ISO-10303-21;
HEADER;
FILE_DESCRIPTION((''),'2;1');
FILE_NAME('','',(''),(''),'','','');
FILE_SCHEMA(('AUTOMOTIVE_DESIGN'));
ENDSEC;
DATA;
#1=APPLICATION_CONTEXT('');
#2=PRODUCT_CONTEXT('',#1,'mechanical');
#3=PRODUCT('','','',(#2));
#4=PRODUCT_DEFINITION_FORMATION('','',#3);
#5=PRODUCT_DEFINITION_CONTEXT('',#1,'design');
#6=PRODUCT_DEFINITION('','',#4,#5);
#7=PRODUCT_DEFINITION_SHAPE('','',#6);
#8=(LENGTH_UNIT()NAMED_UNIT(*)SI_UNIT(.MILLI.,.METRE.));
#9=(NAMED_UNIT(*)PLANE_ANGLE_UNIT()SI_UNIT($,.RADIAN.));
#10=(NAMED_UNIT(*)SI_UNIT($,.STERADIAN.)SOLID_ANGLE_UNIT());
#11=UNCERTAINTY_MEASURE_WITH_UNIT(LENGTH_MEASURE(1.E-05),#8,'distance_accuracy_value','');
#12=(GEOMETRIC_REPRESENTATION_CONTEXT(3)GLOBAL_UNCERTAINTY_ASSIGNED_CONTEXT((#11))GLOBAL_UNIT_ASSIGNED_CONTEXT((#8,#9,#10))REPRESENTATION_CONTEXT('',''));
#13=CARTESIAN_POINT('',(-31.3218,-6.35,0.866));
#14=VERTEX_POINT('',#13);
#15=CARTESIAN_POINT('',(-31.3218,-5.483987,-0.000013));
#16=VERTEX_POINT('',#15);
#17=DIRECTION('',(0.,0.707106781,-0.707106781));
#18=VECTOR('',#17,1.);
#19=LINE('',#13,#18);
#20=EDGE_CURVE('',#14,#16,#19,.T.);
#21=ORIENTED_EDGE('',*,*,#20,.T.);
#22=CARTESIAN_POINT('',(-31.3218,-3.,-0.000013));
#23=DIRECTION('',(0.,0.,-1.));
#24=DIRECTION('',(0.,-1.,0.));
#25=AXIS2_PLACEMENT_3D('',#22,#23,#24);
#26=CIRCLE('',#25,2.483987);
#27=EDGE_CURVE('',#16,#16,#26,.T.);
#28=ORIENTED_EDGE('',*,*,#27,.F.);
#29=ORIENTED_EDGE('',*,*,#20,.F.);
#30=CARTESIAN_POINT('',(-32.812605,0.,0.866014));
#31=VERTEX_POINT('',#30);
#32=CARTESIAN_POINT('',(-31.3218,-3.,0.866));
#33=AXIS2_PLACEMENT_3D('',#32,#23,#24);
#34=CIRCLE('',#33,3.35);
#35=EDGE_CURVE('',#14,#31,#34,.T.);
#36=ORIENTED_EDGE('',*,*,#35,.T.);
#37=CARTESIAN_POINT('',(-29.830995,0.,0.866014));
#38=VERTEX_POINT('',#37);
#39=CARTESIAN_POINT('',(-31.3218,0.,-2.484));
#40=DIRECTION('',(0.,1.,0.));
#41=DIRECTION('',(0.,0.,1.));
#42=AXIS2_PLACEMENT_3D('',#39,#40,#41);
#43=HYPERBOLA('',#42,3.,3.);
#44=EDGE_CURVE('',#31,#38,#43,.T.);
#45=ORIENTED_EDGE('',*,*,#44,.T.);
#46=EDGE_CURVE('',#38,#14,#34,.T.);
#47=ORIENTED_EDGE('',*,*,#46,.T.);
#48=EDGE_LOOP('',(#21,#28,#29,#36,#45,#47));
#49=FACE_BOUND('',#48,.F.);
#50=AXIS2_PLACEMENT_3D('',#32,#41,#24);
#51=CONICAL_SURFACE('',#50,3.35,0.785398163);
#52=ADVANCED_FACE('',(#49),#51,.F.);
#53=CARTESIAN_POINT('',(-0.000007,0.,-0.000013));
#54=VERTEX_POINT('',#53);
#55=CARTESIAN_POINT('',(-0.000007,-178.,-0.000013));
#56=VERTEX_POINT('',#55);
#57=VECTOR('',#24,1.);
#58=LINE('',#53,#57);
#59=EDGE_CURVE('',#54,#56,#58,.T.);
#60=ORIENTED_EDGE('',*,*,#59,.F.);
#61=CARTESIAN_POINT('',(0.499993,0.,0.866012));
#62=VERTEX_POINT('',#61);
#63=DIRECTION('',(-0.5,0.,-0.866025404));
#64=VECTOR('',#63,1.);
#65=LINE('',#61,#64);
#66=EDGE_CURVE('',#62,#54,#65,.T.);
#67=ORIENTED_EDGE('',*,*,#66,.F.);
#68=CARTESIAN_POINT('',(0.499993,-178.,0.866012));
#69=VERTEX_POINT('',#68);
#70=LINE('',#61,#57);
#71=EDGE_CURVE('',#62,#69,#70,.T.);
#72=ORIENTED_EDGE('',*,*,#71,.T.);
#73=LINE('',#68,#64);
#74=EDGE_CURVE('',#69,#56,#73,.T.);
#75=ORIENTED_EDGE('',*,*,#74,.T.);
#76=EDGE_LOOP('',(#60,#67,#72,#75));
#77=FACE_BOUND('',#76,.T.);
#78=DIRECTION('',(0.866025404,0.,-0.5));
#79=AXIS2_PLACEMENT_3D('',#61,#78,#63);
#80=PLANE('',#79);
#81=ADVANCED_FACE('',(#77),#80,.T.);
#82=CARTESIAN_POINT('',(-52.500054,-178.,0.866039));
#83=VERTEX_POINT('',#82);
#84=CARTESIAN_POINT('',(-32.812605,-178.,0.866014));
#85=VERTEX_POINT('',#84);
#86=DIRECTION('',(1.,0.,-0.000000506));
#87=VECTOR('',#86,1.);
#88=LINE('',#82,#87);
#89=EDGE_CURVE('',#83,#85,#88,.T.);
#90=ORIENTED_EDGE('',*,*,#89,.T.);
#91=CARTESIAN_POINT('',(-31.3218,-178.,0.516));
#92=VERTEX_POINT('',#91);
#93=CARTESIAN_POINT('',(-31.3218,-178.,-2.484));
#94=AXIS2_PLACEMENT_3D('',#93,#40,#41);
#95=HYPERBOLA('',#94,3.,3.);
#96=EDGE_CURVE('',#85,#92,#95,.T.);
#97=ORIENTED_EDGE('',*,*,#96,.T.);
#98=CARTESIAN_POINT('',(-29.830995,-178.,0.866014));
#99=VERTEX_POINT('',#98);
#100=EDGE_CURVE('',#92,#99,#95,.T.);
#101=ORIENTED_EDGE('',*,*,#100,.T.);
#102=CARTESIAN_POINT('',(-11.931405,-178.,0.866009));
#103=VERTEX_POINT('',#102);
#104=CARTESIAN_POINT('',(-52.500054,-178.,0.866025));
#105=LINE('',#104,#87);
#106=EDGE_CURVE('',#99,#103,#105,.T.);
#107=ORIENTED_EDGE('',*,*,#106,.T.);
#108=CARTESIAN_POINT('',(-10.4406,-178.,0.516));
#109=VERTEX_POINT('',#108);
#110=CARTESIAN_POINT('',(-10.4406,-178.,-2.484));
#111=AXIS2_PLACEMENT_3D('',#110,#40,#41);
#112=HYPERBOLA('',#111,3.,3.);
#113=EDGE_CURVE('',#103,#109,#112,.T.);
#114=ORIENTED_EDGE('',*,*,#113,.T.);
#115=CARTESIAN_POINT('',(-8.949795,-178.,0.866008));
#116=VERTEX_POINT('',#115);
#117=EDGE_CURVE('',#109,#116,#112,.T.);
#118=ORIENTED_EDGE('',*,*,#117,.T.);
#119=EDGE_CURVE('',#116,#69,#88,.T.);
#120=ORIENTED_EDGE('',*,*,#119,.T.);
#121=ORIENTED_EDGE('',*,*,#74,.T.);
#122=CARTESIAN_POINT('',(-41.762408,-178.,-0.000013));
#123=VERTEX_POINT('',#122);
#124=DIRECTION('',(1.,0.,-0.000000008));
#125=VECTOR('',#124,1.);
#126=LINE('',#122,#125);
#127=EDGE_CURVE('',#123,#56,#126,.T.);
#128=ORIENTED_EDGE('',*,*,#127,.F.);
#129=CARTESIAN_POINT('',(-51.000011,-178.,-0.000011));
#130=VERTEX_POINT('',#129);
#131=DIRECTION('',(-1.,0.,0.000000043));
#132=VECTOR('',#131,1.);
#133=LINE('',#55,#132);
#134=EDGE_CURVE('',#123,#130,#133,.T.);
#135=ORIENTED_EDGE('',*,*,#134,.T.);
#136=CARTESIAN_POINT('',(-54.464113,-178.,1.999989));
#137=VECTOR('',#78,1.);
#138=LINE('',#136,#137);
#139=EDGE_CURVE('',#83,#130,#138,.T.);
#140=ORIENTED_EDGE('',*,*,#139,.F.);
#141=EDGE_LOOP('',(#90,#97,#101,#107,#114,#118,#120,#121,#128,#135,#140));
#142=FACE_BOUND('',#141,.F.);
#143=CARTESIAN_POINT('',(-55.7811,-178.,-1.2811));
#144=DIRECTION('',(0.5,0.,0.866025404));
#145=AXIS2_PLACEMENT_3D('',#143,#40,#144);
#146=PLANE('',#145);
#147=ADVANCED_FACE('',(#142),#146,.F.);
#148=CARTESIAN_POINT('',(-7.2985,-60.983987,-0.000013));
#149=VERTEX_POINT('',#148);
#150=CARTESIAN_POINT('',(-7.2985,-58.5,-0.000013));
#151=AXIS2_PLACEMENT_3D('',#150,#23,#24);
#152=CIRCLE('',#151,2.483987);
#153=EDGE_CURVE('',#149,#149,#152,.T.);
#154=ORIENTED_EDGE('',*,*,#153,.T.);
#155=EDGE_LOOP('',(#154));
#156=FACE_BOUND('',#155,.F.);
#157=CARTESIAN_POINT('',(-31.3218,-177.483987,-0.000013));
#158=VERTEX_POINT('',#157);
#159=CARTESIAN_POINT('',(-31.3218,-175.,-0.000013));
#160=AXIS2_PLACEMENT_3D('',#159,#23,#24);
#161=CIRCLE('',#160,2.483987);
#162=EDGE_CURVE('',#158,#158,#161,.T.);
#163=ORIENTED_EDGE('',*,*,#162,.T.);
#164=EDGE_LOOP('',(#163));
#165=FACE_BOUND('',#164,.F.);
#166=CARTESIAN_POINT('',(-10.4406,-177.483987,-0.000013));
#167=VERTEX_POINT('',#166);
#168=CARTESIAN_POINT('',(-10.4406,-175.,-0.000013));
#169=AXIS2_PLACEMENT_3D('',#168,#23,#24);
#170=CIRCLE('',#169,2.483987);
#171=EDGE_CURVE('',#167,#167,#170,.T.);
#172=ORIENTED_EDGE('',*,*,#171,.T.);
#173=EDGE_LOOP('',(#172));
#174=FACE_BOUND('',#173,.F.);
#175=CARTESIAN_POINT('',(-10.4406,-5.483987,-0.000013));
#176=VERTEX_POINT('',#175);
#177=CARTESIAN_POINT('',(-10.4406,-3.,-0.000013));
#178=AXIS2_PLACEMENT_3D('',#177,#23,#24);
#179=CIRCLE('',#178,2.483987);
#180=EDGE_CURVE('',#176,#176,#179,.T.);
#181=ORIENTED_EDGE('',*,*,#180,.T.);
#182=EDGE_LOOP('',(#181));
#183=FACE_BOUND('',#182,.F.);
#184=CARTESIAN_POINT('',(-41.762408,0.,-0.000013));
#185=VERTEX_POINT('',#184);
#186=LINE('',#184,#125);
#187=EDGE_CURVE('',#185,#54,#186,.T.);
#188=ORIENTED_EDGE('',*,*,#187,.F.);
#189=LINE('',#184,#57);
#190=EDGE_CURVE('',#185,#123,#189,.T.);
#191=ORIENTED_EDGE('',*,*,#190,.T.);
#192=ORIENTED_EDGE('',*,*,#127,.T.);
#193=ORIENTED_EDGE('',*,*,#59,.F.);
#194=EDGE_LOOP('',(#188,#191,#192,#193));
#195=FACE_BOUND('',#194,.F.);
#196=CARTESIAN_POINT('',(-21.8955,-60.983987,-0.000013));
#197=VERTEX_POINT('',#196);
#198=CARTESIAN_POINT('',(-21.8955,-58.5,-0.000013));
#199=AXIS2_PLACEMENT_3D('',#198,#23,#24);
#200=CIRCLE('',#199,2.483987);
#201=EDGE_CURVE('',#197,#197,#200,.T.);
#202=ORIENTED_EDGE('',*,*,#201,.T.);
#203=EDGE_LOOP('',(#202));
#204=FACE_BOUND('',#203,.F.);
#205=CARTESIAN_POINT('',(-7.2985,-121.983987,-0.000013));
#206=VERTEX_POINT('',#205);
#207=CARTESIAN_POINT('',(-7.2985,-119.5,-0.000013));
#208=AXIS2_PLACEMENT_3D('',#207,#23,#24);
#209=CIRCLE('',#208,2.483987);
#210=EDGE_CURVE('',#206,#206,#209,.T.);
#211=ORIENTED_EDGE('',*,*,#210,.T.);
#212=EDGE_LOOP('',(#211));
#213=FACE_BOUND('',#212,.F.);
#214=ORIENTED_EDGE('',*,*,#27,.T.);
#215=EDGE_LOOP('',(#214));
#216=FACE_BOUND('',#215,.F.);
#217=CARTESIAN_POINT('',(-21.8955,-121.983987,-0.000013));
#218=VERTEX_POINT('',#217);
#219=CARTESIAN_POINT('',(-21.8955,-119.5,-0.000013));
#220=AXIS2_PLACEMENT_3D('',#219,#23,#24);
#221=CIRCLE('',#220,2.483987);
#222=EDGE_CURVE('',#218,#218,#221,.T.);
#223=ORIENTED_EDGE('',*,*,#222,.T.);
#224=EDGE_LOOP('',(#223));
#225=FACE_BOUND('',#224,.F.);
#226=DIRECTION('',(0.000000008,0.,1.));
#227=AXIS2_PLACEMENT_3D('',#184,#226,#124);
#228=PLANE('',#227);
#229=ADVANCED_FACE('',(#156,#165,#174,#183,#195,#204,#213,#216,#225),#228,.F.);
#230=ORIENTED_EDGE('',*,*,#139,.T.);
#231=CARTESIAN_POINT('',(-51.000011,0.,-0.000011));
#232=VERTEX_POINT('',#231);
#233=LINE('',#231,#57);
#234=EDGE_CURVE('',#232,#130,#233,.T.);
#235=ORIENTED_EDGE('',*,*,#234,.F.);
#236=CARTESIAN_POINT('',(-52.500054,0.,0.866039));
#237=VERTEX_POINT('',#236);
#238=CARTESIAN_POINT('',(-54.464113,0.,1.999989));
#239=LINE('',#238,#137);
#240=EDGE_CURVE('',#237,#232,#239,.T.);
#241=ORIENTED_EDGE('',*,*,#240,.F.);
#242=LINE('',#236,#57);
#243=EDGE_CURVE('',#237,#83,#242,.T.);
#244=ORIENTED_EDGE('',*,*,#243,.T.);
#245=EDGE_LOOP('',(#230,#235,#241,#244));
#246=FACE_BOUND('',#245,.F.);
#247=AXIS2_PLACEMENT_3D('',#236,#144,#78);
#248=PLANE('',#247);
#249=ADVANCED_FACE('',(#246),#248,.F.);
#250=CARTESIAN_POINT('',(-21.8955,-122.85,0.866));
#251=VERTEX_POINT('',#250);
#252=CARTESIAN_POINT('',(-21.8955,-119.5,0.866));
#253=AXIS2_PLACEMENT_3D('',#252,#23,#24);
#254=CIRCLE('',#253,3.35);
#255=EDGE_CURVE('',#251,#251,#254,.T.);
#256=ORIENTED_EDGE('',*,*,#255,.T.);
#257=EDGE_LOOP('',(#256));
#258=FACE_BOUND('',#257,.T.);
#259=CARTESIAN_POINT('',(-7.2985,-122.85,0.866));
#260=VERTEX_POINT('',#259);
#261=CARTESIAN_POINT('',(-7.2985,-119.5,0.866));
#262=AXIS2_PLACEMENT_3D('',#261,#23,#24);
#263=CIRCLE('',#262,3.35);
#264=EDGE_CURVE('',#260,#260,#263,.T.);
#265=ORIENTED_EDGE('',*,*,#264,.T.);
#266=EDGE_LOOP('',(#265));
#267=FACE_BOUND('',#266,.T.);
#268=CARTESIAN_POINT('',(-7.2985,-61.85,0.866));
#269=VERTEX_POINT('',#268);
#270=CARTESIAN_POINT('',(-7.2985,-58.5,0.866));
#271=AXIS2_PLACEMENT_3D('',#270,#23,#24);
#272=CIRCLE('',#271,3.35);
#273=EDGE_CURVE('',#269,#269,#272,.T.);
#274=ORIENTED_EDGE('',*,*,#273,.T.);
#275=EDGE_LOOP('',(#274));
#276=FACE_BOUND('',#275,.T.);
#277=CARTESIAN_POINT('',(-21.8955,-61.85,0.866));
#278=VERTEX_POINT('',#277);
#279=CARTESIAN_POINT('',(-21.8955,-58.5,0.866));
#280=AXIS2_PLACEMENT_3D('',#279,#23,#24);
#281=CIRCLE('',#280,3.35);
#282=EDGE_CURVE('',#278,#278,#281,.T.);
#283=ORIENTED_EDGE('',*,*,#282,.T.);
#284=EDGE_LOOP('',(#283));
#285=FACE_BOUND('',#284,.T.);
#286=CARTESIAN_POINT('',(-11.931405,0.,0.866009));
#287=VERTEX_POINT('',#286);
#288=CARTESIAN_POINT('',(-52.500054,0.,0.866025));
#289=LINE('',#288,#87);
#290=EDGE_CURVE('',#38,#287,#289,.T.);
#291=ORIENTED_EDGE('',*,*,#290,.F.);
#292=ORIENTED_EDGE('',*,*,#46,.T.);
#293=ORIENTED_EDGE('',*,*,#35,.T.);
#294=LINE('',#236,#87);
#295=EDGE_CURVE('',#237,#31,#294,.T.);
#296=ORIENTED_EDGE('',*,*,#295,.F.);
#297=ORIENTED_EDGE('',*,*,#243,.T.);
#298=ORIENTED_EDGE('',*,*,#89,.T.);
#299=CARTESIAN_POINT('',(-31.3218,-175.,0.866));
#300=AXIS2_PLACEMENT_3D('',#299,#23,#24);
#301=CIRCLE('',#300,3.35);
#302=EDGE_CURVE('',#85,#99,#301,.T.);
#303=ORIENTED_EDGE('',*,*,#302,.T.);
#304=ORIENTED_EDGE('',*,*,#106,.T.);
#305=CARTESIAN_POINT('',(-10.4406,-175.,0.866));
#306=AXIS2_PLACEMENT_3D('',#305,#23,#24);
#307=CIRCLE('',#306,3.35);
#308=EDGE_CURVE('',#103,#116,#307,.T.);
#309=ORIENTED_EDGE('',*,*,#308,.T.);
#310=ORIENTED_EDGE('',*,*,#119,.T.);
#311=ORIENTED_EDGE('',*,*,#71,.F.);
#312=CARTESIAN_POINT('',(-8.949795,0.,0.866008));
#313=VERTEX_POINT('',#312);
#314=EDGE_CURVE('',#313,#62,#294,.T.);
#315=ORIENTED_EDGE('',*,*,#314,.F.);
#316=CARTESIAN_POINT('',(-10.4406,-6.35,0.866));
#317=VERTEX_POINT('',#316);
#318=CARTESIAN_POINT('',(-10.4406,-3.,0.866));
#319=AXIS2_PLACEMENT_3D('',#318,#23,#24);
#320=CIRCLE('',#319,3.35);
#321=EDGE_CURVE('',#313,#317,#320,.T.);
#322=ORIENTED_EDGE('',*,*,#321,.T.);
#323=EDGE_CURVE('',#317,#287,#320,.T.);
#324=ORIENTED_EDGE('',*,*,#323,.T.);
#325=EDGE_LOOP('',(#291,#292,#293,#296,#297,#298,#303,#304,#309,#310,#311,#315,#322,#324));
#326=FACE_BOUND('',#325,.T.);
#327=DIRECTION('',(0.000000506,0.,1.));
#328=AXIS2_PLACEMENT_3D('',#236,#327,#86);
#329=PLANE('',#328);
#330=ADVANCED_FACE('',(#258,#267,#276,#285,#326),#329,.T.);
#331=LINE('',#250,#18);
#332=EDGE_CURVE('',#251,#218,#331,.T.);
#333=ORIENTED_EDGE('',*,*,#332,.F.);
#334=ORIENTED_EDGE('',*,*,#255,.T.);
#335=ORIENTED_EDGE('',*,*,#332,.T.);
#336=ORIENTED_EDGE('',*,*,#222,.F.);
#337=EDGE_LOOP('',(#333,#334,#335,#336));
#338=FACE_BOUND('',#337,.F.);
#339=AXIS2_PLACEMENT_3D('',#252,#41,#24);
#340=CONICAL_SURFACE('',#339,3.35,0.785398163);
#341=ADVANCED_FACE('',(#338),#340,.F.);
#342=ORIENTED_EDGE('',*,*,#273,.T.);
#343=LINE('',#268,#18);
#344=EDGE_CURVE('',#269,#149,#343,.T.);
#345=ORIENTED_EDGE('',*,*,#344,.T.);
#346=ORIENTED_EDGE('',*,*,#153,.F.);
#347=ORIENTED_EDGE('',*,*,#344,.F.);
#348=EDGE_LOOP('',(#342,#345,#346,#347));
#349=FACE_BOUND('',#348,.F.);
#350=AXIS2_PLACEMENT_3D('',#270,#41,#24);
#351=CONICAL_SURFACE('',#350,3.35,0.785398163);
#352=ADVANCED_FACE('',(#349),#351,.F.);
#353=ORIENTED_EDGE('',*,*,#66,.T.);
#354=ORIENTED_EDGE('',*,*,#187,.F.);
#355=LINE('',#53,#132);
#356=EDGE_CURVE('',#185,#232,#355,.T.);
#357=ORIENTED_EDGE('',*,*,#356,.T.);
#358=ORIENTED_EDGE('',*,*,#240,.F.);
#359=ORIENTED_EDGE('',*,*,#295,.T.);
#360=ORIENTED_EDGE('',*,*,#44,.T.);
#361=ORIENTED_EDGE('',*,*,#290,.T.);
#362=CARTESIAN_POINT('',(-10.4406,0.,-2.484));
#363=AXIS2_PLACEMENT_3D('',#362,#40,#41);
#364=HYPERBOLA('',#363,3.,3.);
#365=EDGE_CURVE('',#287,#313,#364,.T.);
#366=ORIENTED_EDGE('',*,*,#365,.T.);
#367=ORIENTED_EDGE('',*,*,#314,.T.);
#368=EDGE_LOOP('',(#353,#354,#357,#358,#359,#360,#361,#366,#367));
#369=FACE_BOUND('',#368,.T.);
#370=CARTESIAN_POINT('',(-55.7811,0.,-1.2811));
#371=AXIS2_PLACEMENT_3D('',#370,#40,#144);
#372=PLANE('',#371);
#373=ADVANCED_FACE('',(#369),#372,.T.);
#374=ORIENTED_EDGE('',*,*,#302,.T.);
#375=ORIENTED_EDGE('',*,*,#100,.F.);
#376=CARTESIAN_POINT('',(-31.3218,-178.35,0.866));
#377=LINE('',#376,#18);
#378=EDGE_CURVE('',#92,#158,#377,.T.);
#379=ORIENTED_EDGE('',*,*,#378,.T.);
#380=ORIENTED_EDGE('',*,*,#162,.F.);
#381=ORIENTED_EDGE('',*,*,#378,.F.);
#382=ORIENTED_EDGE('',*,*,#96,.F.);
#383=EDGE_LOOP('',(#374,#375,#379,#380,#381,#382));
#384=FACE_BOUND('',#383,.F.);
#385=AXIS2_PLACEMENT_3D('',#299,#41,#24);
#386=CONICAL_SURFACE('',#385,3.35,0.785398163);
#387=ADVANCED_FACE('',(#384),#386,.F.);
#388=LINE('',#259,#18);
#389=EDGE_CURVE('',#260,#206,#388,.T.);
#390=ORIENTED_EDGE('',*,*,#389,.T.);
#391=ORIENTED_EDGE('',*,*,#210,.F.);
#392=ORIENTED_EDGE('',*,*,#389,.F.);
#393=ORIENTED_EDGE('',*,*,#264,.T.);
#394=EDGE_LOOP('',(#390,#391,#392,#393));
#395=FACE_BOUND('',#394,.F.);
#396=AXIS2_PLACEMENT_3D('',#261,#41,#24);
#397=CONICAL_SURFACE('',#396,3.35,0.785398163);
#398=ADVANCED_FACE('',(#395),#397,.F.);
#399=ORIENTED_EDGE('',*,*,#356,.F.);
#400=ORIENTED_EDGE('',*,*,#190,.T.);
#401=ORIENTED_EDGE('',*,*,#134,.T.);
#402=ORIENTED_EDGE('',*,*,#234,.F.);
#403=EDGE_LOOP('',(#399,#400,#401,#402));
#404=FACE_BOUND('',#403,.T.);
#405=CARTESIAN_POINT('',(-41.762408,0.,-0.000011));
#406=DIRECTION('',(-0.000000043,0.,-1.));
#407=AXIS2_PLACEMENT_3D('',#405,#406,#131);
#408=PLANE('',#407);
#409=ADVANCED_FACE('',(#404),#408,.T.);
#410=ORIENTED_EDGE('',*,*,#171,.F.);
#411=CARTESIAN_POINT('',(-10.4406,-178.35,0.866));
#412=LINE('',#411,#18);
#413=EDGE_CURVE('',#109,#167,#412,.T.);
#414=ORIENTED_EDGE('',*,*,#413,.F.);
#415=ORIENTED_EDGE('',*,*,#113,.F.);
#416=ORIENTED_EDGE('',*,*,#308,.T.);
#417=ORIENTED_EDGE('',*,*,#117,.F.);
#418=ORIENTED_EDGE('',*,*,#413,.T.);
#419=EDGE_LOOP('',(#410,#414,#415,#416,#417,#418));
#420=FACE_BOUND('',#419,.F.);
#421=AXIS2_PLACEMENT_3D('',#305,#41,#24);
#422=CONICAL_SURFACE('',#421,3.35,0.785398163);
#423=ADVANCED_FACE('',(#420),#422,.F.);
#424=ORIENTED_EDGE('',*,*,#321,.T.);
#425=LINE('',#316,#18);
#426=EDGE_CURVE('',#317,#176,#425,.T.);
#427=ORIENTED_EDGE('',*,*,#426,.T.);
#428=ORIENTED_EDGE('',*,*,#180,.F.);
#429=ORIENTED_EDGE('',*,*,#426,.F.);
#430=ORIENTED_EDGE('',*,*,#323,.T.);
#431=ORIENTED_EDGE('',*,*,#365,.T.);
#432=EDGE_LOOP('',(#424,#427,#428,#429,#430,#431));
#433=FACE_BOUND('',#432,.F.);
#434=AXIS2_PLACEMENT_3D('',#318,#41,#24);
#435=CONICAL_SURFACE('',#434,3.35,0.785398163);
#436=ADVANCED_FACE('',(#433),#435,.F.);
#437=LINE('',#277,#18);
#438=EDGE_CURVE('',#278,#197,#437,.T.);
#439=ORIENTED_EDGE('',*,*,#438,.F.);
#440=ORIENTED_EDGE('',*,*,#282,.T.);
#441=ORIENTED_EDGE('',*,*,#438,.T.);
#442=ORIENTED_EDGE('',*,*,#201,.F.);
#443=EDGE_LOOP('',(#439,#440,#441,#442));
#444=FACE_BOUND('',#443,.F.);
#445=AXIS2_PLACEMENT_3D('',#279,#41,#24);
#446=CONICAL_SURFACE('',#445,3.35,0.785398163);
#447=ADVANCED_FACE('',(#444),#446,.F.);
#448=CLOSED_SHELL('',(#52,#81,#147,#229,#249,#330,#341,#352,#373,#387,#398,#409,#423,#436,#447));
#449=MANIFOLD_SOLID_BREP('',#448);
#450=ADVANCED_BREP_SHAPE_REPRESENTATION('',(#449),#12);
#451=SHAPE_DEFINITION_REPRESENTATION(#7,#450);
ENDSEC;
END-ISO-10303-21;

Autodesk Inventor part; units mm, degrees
ref_plane "YZ Plane" through (0, 0, 0) normal (1, 0, 0) x (0, 1, 0)
ref_plane "Work Plane1" through (14.6553, 0, -25.7817) normal (0, 1, 0) x (-0.8660254, 0, 0.5)
ref_plane "Work Plane2" through (-53.25, -178, -67.8971) normal (0, -1, 0) x (0.8660254, 0, -0.5)
ref_plane "Work Plane3" through (14.6553, 0, -25.7817) normal (0, 1, 0) x (-0.8660254, 0, 0.5)
ref_plane "Work Plane4" through (-55.7811, 0, -1.2811) normal (0, 1, 0) x (0.5, 0, 0.8660254)
sketch "Sketch4" plane through (-55.7811, 0, -1.2811) normal (0, 1, 0) x (0.5, 0, 0.8660254)
  line L0 (3.5, 3.5) -> (-1, 3.5) projected
  line L1 (-1, 3.5) -> (-1, -0.5) projected
  line L2 (-1, -0.5) -> (-4.5, -0.5) projected
  line L3 (-4.5, -0.5) -> (-4.5, -14.5) projected
  line L4 (-4.5, -14.5) -> (4.5, -0.5) projected
  line L5 (4.5, -0.5) -> (3.5, -0.5) projected
  line L6 (3.5, -0.5) -> (3.5, 3.5) projected
  line L7 (8.1188, 11.5) -> (29, 47.6673) projected
  line L8 (29, 47.6673) -> (3.5, 3.5)
  line L9 (3.5, 1.7679) -> (30, 47.6673)
  line L10 (30, 47.6673) -> (29, 47.6673)
  point P0 (29, 47.6673)
  dimension "d10" = 1
ref_plane "Work Plane5" through (-46.3218, -178, -67.8971) normal (0, -1, 0) x (0.8660254, 0, -0.5)
extrude "Extrusion2" add sketch "Sketch4" against normal up to surface (178 mm away) contours L8 L7 L10 L9 L6
sketch "Sketch5" plane through (-52.5, 0, 0.866) normal (0, 0, 1) x (1, 0, 0)
  circle A0 centre (42.0594, -3) radius 2.3 projected
  circle A1 centre (21.1782, -3) radius 2.3 projected
  circle A2 centre (30.6045, -58.5) radius 2.3 projected
  circle A3 centre (45.2015, -58.5) radius 2.3 projected
  circle A4 centre (30.6045, -119.5) radius 2.3 projected
  circle A5 centre (45.2015, -119.5) radius 2.3 projected
  circle A6 centre (21.1782, -175) radius 2.3 projected
  circle A7 centre (42.0594, -175) radius 2.3 projected
  point P0 (52.5, 0)
hole "Hole2" at (-10.4406, -3, 0.866) at (-31.3218, -3, 0.866) at (-7.2985, -58.5, 0.866) at (-21.8955, -58.5, 0.866) at (-7.2985, -119.5, 0.866) at (-21.8955, -119.5, 0.866) at (-31.3218, -175, 0.866) at (-10.4406, -175, 0.866) direction (0, 0, -1) diameter 3.6 end through all countersink diameter 6.7 countersink angle 90 clearance for "Countersunk Flat Head Screw ISO 2009/7046" size "M3" standard "ISO"
properties part number "frobt" material "Nylon 6/6"
